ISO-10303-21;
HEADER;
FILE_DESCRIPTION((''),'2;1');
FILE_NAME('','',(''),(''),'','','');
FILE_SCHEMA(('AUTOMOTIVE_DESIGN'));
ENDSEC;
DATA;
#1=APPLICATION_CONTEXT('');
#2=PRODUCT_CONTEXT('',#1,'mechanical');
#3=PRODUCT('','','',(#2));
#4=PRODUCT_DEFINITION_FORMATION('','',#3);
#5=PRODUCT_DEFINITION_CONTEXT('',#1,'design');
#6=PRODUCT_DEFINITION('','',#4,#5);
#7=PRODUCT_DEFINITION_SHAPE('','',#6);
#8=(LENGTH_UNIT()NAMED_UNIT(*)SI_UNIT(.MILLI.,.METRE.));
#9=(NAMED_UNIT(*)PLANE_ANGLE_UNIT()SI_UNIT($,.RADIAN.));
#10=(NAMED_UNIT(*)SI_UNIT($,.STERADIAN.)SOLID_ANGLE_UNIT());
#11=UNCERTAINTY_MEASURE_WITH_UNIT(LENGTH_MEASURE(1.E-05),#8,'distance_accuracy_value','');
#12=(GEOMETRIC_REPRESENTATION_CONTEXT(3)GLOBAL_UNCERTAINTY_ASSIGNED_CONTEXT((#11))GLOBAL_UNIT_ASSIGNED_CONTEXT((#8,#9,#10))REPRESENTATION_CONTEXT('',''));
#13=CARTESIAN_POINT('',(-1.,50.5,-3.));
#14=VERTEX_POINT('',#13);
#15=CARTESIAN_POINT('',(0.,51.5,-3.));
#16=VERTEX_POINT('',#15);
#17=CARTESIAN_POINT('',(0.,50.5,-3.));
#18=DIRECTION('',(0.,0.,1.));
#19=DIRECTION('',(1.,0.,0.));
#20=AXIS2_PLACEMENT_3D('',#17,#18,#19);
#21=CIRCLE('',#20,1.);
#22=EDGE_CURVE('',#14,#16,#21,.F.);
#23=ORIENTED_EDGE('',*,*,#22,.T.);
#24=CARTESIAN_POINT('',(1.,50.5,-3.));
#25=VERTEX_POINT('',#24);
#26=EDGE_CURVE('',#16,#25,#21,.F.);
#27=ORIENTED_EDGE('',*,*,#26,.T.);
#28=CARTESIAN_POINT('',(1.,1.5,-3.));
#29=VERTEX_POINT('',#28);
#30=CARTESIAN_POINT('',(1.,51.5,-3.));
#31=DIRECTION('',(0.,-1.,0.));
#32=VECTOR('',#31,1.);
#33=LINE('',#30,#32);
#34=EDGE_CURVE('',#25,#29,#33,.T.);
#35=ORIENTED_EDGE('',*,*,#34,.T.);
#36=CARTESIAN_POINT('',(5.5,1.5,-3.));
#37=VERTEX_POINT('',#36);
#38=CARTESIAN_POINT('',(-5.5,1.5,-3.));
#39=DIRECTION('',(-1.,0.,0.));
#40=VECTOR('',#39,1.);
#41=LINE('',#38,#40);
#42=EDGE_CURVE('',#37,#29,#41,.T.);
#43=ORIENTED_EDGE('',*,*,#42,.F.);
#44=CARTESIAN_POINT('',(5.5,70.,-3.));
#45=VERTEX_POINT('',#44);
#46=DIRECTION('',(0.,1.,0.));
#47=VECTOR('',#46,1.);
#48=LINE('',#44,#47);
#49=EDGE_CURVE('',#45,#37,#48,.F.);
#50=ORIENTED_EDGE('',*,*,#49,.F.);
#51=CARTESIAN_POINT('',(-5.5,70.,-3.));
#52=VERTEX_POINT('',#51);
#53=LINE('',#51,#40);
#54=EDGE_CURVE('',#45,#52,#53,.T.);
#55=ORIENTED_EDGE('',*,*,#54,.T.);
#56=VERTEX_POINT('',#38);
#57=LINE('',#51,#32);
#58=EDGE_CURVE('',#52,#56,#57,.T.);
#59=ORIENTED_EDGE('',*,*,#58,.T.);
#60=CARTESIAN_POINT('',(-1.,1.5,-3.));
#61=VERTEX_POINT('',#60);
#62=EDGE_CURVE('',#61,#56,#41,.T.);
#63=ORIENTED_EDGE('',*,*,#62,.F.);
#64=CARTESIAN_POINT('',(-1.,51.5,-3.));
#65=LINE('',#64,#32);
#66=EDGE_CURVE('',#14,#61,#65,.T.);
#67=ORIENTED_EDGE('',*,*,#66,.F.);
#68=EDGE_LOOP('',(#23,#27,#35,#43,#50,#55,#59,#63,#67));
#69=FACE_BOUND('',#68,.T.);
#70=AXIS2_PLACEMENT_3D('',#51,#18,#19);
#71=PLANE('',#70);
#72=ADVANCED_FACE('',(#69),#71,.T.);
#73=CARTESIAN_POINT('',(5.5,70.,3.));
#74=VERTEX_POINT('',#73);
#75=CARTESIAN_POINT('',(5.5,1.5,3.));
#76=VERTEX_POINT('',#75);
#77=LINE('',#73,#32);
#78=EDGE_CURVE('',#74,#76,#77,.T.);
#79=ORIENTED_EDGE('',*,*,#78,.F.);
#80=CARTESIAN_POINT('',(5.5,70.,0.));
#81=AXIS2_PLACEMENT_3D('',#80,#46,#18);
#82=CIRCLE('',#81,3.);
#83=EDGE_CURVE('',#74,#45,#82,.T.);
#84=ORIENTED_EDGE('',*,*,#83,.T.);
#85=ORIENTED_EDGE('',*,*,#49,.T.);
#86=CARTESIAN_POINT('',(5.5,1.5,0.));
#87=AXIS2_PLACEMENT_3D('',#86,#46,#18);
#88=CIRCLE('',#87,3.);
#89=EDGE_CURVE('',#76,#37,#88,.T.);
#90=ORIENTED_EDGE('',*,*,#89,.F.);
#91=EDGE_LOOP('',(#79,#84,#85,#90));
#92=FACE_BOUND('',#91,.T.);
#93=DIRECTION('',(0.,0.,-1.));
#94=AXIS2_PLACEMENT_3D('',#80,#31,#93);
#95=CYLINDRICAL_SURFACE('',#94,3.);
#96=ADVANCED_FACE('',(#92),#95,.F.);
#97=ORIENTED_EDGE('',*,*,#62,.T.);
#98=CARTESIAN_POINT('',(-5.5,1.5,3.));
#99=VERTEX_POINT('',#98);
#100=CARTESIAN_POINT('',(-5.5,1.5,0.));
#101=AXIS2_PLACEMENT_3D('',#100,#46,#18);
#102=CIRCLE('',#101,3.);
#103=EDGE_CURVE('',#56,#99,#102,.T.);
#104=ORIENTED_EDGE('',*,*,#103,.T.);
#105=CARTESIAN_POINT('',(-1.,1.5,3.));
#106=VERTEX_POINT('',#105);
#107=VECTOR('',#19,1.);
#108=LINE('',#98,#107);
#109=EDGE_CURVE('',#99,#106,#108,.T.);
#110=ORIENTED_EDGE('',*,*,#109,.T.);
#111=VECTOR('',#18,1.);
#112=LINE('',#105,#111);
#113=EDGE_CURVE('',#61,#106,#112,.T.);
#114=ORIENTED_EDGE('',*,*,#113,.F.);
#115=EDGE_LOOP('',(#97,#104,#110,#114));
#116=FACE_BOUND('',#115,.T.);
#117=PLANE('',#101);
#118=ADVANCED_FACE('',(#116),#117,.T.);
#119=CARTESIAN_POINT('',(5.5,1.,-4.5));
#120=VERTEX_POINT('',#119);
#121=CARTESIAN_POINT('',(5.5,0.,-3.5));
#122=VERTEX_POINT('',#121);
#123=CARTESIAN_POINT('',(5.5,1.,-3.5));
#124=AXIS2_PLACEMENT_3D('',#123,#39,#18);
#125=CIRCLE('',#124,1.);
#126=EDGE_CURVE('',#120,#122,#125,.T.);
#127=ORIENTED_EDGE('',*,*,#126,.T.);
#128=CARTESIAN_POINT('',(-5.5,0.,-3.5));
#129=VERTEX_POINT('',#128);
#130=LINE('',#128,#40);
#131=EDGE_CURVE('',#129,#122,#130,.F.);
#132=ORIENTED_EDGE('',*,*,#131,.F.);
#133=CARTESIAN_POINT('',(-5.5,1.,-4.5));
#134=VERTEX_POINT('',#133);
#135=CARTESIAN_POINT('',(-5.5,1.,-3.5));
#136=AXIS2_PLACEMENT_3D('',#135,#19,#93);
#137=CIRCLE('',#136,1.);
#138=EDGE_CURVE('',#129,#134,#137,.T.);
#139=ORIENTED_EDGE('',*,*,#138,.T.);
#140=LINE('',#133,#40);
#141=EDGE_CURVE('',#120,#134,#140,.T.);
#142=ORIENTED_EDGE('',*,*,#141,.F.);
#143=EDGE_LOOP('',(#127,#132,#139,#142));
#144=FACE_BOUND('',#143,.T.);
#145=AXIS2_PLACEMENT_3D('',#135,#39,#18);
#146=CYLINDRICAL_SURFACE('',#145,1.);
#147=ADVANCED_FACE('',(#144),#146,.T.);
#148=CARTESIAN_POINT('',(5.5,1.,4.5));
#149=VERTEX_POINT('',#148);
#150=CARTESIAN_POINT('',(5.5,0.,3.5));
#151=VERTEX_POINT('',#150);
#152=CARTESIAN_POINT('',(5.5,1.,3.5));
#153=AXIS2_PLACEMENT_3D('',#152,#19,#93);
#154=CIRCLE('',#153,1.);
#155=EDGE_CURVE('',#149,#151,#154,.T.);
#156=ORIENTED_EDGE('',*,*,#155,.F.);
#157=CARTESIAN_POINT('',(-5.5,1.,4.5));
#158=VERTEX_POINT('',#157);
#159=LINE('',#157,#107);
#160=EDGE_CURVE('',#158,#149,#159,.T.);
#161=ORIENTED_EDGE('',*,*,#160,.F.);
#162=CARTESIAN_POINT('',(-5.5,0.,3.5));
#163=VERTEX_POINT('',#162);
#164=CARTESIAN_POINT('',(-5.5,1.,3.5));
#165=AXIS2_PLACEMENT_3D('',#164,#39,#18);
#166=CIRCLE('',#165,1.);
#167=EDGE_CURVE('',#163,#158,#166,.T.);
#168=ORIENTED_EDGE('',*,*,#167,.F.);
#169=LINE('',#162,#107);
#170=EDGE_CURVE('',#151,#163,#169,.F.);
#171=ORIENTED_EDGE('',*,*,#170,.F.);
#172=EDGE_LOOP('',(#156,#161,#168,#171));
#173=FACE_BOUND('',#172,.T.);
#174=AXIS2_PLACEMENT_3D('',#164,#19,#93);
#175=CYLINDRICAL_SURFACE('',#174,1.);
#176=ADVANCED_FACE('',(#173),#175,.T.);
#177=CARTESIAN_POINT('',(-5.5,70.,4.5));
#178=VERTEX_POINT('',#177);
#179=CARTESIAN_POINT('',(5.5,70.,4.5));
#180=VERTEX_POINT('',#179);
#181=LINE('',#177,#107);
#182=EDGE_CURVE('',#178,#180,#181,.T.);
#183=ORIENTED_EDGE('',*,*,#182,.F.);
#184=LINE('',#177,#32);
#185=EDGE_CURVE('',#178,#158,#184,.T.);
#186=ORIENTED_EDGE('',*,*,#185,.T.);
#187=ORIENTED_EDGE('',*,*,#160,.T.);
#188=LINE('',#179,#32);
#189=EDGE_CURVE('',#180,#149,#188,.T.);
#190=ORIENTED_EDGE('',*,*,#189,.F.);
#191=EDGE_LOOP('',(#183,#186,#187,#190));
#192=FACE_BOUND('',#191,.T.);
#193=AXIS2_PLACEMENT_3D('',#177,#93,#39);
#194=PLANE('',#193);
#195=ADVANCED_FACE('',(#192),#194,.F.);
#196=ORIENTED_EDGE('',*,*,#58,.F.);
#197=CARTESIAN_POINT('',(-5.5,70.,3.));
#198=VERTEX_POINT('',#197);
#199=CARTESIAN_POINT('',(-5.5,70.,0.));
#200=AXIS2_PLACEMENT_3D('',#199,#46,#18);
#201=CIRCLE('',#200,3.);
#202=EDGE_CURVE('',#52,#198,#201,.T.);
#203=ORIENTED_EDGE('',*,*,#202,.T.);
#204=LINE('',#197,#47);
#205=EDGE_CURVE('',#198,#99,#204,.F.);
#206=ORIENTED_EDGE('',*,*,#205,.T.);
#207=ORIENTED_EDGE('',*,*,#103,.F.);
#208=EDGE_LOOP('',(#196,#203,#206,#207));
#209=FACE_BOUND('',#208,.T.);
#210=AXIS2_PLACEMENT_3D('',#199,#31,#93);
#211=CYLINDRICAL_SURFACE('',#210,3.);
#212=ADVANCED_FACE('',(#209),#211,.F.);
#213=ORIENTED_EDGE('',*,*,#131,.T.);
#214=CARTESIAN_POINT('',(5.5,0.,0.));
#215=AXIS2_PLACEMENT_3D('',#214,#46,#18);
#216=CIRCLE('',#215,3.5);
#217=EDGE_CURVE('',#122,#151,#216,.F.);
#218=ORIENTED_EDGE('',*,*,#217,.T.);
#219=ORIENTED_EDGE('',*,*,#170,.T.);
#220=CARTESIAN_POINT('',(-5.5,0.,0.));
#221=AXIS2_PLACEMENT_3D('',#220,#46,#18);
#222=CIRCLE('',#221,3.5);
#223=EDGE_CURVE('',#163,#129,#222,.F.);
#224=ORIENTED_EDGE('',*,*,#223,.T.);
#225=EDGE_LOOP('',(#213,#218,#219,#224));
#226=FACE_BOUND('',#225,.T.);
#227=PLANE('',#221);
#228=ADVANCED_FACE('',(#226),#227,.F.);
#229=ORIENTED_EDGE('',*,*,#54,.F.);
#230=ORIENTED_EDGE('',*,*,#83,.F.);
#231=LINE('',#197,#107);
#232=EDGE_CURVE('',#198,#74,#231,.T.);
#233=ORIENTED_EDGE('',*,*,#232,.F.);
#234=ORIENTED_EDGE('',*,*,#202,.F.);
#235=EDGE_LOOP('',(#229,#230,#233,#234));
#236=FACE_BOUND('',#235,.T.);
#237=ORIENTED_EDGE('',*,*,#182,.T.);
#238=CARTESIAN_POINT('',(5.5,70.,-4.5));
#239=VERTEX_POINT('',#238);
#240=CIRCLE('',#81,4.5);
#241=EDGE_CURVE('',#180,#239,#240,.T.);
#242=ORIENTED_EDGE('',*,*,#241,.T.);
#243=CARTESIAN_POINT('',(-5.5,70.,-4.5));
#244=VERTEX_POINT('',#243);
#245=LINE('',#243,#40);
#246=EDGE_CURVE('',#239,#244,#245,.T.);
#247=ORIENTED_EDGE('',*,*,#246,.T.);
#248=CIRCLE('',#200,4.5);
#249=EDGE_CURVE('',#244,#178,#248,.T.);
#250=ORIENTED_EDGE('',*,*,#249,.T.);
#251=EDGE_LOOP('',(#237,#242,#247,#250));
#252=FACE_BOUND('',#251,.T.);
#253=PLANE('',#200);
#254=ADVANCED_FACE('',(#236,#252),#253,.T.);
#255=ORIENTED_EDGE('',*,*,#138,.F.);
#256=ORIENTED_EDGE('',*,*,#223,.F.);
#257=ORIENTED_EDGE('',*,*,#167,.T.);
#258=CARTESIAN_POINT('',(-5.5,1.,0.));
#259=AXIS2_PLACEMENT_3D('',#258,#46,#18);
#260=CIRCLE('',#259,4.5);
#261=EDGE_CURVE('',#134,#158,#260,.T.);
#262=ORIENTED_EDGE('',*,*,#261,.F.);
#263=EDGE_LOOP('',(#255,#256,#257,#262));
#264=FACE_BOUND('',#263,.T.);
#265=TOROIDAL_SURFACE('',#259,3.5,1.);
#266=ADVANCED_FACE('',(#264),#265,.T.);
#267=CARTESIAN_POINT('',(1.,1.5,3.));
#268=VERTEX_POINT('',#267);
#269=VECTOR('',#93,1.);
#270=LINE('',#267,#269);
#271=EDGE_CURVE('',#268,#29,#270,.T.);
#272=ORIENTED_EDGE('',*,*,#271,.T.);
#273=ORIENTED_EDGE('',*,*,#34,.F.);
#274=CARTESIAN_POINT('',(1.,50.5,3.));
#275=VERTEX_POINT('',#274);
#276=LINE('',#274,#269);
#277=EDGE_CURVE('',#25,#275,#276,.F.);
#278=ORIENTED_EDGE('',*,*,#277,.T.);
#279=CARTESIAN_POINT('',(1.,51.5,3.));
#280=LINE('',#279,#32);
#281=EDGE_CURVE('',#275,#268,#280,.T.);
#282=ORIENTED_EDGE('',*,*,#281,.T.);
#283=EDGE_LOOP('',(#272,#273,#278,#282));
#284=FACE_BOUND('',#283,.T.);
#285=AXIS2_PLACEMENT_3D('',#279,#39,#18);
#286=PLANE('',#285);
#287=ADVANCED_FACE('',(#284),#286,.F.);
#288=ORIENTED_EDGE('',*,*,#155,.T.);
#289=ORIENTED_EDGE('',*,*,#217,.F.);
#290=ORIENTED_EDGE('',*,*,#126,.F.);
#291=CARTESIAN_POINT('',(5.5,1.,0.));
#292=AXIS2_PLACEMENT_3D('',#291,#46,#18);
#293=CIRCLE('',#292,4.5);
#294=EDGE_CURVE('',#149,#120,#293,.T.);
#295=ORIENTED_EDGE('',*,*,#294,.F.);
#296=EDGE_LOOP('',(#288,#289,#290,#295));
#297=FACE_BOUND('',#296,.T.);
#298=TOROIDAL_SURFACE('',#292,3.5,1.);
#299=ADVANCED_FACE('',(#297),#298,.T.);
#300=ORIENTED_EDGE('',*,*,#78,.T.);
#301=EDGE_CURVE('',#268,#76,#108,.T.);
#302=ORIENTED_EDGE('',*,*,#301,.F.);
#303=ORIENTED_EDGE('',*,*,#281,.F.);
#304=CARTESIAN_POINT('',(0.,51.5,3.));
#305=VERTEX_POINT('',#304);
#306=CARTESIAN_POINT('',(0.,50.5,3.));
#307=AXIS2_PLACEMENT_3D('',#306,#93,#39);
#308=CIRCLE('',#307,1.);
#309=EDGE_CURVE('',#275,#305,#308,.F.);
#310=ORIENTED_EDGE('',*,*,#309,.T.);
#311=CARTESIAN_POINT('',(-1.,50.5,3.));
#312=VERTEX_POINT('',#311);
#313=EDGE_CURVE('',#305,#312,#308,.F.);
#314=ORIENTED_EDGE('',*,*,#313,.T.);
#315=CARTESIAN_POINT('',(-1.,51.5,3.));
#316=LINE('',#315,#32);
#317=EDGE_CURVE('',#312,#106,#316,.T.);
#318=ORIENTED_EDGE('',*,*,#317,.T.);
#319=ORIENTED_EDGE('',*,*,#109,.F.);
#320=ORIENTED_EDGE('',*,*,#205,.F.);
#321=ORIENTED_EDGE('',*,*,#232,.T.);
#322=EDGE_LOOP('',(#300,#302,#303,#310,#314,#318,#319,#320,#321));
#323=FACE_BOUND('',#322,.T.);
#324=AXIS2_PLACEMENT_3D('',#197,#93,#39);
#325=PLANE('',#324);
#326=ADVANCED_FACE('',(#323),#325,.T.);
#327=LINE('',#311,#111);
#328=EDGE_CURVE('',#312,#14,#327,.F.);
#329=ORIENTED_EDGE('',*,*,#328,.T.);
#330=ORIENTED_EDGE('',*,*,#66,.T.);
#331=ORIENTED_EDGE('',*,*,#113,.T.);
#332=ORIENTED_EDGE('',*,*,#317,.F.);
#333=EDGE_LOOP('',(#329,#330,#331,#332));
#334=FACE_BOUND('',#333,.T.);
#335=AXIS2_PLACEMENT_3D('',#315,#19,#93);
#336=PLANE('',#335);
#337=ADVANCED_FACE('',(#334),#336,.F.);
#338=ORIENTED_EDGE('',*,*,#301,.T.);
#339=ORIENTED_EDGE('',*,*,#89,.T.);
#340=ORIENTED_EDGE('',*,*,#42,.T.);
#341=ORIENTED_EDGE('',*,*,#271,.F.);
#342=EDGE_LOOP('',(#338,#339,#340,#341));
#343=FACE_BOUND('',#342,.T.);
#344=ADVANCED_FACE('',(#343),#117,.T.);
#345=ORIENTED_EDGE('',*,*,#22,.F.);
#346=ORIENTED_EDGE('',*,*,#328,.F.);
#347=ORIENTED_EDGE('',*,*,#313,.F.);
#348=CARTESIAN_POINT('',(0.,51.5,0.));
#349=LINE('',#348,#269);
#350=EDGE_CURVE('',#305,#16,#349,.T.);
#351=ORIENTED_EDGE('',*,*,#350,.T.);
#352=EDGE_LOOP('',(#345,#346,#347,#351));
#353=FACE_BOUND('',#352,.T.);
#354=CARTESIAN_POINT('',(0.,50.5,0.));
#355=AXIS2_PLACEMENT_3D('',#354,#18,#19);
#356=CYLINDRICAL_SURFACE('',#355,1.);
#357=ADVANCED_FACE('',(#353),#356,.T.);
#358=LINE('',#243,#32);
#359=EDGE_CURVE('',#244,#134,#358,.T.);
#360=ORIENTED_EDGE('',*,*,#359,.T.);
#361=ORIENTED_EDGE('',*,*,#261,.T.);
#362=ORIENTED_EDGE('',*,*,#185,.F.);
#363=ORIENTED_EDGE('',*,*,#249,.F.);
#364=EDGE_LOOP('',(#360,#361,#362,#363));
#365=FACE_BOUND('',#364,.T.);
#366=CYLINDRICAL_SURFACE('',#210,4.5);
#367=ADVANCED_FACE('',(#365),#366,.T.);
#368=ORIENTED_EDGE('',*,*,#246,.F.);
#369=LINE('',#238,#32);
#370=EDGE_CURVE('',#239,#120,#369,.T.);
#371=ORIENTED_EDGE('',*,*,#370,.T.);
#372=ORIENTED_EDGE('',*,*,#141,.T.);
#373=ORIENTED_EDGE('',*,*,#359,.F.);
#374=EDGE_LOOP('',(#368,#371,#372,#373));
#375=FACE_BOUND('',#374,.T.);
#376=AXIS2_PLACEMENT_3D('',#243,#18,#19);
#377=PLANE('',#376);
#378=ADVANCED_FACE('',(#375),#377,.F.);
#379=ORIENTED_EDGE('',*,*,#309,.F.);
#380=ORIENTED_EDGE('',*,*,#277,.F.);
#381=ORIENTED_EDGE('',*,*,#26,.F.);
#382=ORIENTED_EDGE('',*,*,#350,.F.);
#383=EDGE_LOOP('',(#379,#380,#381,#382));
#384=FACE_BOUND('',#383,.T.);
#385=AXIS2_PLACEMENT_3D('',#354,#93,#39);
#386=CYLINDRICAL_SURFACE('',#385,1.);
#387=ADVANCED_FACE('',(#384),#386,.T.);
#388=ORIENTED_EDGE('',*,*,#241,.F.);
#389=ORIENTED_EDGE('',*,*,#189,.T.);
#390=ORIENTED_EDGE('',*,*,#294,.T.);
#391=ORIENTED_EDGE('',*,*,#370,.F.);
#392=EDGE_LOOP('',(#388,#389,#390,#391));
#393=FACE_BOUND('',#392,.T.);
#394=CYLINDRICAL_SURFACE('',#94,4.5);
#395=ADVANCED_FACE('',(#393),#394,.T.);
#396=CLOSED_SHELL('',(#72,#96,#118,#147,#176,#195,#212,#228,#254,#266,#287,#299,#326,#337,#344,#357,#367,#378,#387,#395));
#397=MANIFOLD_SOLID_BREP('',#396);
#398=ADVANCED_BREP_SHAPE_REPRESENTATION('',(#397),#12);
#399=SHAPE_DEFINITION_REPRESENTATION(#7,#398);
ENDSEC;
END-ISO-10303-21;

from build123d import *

# Parameters (mm, degrees)
DODANIE_WYCI_GNI_CIE1_DEPTH = 70
SKORUPA1_T                  = -1.5
SZKIC2_W                    = 2
SZKIC2_H                    = 6
DODANIE_WYCI_GNI_CIE2_DEPTH = 50
ZAOKR_GLENIE2_R             = 1


with BuildPart() as part:
    # Szkic1 → Dodanie-wyciągnięcie1 (new body)
    with BuildSketch(Plane(origin=(0, 0, 0), x_dir=(1, 0, 0), z_dir=(0, 1, 0))):
        with BuildLine():
            Line((-5.5, 4.5), (5.5, 4.5))
            ThreePointArc((5.5, 4.5), (10, 0), (5.5, -4.5))
            Line((5.5, -4.5), (-5.5, -4.5))
            ThreePointArc((-5.5, -4.5), (-10, 0), (-5.5, 4.5))
        make_face()
    extrude(amount=DODANIE_WYCI_GNI_CIE1_DEPTH)

    # Skorupa1
    skorupa1_openings = [part.faces().sort_by_distance(p)[0] for p in [
        (0, 70, 0),
    ]]
    offset(amount=SKORUPA1_T, openings=skorupa1_openings, kind=Kind.INTERSECTION)

    # Szkic2 → Dodanie-wyciągnięcie2 (add)
    with BuildSketch(Plane(origin=(0, 1.5, 0), x_dir=(1, 0, 0), z_dir=(0, 1, 0))):
        Rectangle(SZKIC2_W, SZKIC2_H)
    extrude(amount=DODANIE_WYCI_GNI_CIE2_DEPTH)

    # Zaokrąglenie2
    zaokr_glenie2_edges = [part.edges().sort_by_distance(p)[0] for p in [
        (0, 0, -4.5),
        (10, 0, 0),
        (0, 0, 4.5),
        (-10, 0, 0),
        (-1, 51.5, 0),
        (1, 51.5, 0),
    ]]
    fillet(zaokr_glenie2_edges, radius=ZAOKR_GLENIE2_R - 0.0001)  # a hair under: the kernel refuses the full size


solid = part.part
